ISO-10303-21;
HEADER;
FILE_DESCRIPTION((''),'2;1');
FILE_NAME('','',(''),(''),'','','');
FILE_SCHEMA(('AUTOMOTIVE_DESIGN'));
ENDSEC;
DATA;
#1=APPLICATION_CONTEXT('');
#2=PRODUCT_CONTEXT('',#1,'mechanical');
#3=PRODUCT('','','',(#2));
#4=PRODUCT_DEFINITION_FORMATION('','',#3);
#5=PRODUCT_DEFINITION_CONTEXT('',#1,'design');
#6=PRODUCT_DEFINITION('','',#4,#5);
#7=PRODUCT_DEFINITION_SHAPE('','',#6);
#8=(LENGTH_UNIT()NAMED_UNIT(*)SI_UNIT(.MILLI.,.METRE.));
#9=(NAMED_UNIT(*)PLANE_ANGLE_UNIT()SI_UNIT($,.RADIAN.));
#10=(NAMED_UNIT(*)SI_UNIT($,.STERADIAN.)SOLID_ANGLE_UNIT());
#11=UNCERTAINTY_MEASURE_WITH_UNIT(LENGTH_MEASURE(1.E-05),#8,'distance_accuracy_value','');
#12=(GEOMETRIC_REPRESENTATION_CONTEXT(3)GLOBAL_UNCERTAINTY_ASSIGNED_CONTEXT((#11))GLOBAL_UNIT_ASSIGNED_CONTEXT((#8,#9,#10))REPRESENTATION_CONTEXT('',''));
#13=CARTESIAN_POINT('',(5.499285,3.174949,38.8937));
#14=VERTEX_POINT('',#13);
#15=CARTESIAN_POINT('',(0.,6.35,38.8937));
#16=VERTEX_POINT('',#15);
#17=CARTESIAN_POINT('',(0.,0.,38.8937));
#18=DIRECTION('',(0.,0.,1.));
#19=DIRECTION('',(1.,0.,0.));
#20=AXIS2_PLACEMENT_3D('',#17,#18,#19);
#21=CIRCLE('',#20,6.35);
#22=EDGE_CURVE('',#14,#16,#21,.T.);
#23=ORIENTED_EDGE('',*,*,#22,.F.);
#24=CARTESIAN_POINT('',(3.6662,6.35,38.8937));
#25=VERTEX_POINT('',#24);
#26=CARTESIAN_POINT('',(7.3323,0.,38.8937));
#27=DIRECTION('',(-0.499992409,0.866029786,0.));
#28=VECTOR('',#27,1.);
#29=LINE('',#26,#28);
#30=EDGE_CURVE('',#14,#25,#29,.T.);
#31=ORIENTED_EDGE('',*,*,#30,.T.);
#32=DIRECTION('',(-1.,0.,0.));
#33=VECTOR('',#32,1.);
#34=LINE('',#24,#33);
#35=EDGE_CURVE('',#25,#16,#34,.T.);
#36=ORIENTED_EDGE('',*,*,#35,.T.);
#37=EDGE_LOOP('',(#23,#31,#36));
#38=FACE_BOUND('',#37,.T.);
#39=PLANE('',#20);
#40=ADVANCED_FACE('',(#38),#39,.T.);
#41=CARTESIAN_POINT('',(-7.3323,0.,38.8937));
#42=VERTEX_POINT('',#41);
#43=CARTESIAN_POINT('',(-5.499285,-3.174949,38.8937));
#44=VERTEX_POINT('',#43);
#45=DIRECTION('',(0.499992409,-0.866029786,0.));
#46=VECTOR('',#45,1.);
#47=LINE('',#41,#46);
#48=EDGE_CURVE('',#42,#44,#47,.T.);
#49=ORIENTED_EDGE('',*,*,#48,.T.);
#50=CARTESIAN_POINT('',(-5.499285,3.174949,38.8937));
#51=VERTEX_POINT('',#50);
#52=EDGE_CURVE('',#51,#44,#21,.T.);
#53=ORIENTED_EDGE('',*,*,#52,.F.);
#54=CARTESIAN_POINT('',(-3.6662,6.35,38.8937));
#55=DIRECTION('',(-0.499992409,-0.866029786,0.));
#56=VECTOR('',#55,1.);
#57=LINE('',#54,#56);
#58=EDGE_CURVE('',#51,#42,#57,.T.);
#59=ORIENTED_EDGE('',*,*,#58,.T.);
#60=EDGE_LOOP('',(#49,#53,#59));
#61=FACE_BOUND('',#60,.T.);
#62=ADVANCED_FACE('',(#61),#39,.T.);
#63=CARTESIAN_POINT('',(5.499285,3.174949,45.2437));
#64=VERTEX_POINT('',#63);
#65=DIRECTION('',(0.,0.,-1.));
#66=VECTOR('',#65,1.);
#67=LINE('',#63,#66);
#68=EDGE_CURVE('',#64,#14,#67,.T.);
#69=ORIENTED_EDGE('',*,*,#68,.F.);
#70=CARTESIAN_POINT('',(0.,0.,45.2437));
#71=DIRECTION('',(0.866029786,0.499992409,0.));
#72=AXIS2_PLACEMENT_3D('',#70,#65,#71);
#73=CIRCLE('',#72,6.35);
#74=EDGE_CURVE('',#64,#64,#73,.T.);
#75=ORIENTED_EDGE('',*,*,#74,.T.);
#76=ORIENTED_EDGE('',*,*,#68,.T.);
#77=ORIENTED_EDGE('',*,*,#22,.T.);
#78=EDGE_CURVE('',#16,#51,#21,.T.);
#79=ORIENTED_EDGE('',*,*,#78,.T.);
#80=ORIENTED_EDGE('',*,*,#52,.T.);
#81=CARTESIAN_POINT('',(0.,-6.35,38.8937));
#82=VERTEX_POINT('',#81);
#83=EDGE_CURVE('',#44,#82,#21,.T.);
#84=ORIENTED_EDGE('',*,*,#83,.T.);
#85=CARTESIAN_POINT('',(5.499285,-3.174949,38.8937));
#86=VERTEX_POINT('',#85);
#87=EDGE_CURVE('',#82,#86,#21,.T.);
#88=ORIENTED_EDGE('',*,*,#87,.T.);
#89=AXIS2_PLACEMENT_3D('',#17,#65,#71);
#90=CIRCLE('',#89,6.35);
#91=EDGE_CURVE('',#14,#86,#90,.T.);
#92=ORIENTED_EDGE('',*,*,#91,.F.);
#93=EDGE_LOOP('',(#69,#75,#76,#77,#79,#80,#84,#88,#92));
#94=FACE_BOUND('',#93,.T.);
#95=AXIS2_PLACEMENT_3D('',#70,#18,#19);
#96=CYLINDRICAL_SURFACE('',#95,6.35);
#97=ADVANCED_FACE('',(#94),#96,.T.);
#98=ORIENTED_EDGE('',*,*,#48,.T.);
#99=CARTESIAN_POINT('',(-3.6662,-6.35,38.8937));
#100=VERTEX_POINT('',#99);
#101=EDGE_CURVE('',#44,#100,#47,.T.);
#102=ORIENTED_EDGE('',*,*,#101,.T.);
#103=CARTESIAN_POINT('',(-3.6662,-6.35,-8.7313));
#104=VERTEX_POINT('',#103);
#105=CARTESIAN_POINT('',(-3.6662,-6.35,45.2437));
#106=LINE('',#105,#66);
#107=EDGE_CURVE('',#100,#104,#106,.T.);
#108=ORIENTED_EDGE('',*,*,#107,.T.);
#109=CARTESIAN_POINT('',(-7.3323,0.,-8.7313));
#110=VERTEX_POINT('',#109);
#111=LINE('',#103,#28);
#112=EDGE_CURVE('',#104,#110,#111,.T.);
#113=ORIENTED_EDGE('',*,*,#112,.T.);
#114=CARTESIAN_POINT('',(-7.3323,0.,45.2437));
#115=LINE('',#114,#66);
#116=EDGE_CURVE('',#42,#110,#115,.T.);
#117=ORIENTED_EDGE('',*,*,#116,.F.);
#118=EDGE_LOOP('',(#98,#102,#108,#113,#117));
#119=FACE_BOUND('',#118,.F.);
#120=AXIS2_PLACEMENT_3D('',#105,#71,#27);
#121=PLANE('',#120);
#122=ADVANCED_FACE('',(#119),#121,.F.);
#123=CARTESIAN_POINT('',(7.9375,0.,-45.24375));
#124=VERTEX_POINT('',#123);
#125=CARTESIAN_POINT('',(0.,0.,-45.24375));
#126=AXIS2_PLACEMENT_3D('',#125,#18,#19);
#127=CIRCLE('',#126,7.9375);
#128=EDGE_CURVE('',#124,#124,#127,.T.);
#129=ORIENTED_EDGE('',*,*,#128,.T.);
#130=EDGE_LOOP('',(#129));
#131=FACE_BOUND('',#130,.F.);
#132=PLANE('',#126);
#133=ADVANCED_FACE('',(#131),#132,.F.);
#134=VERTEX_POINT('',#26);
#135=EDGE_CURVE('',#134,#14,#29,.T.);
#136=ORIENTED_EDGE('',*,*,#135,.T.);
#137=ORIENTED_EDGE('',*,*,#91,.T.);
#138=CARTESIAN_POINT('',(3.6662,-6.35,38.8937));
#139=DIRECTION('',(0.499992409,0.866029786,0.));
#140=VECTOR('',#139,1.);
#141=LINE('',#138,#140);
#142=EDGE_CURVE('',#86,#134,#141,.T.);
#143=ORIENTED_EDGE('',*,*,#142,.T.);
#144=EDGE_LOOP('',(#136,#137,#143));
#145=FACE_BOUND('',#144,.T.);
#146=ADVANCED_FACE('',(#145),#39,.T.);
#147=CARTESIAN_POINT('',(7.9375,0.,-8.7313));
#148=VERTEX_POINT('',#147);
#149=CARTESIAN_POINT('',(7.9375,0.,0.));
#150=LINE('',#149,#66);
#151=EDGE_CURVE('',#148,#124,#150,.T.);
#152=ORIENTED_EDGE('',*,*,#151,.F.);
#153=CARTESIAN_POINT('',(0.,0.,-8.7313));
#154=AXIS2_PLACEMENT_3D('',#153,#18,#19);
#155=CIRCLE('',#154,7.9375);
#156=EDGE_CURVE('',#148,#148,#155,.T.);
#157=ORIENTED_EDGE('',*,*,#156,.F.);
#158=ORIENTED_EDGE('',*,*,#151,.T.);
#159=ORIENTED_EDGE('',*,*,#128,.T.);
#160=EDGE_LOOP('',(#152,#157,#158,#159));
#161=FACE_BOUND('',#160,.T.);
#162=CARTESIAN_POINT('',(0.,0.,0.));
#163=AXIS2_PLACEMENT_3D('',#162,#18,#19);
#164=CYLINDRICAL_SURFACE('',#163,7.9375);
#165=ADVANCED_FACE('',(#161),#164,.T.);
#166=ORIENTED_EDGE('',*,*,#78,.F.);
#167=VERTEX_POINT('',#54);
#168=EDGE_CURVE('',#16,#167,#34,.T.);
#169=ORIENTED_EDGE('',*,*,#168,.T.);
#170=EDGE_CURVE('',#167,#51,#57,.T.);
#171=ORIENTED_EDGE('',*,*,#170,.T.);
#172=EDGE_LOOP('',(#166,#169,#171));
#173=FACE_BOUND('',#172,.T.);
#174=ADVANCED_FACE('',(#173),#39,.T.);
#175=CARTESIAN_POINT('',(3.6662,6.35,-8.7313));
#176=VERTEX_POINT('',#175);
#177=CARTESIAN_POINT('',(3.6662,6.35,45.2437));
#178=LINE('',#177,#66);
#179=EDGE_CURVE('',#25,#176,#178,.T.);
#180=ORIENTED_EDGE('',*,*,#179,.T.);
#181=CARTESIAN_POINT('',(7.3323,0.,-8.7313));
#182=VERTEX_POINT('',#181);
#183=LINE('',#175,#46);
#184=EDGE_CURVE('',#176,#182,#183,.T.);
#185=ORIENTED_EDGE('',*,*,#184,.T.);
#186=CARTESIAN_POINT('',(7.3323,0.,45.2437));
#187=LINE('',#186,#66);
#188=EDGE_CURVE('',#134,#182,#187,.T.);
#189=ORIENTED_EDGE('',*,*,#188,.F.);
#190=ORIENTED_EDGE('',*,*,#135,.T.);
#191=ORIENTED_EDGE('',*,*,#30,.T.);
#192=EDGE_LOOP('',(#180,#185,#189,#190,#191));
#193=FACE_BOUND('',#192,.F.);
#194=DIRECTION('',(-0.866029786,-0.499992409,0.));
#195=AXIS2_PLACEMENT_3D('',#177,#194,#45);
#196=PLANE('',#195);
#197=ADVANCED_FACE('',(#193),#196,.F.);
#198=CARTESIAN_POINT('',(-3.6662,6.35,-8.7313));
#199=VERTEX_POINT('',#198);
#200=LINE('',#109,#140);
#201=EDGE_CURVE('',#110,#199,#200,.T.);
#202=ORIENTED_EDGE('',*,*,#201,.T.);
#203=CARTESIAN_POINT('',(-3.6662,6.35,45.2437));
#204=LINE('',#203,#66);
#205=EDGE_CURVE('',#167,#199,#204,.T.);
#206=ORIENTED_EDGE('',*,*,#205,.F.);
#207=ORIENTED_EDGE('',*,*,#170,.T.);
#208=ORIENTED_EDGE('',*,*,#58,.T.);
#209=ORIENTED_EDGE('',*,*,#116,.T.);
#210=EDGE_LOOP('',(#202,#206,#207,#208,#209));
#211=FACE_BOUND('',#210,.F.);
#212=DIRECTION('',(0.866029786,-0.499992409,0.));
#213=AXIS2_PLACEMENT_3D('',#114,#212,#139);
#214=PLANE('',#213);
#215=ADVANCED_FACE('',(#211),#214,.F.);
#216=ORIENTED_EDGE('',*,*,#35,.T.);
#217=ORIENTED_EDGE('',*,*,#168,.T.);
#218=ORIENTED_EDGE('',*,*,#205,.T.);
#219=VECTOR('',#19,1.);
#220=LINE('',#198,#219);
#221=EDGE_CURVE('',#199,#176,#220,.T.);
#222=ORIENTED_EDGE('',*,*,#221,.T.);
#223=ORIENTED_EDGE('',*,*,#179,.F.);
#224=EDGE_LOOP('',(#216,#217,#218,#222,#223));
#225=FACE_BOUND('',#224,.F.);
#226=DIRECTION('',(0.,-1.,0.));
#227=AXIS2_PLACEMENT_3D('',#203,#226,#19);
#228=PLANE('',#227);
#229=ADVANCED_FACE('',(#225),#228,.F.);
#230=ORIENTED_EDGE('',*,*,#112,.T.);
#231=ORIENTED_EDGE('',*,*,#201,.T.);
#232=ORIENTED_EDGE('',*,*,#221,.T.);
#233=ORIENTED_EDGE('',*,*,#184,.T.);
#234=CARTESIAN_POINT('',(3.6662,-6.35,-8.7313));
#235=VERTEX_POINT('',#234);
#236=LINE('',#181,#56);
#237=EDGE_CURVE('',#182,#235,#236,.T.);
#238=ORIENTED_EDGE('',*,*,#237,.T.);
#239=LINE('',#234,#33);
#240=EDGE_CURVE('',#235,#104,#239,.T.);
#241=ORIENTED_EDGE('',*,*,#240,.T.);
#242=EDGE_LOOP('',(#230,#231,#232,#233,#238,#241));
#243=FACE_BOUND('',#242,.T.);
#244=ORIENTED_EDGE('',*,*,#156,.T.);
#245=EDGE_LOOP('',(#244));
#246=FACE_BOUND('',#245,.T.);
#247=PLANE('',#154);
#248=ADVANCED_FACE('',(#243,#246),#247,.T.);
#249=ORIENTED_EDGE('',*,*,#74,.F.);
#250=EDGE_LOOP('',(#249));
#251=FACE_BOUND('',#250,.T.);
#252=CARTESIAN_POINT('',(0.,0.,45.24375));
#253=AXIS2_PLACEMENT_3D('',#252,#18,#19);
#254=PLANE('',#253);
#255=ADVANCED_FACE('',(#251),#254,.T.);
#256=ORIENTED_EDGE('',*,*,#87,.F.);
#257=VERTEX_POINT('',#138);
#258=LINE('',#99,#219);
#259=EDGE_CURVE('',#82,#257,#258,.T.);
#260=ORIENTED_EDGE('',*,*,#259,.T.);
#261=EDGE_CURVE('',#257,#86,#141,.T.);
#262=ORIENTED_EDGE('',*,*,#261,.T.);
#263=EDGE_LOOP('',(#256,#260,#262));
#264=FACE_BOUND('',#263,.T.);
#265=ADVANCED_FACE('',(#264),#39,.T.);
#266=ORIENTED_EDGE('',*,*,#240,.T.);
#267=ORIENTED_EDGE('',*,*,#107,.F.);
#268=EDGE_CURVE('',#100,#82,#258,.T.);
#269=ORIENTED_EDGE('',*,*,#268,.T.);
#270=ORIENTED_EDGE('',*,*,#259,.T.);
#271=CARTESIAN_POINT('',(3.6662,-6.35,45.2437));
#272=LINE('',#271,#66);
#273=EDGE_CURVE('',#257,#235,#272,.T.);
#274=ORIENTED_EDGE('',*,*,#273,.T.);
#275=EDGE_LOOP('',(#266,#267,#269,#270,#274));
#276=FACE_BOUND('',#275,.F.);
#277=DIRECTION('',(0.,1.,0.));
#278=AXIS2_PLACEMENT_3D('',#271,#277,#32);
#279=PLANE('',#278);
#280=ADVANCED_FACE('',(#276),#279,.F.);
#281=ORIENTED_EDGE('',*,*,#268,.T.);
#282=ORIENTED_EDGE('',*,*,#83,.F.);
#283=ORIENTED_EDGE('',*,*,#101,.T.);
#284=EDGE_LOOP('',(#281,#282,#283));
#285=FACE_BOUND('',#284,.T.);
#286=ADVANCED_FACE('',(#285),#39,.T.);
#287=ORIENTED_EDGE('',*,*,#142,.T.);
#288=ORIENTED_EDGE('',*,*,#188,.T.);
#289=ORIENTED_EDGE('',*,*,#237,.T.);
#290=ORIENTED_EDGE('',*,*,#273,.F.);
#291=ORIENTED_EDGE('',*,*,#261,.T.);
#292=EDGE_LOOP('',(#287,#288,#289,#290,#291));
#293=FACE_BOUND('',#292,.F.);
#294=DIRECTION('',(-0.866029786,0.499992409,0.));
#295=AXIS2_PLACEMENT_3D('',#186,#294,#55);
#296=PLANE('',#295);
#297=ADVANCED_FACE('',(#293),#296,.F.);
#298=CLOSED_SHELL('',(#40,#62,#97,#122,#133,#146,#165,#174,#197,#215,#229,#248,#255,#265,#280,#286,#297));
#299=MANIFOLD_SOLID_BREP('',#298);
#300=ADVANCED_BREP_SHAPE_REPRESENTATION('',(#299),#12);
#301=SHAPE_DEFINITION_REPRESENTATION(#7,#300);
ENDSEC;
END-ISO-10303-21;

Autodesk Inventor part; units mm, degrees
ref_plane "YZ Plane" through (0, 0, 0) normal (1, 0, 0) x (0, 1, 0)
ref_plane "XZ Plane" through (0, 0, 0) normal (0, 1, 0) x (-1, 0, 0)
ref_plane "XY Plane" through (0, 0, 0) normal (0, 0, 1) x (1, 0, 0)
sketch "Sketch1" plane through (0, 0, 0) normal (0, 0, 1) x (1, 0, 0)
  circle A0 centre (0, 0) radius 7.9375
  dimension "d0" = 15.875
extrude "Extrusion1" add sketch "Sketch1" along normal mid plane 90.4875
sketch "Sketch2" plane through (0, 0, 45.2437) normal (0, 0, 1) x (1, 0, 0)
  line L0 (-3.6662, 6.35) -> (3.6662, 6.35)
  line L1 (3.6662, 6.35) -> (7.3323, 0)
  line L2 (7.3323, 0) -> (3.6662, -6.35)
  line L3 (3.6662, -6.35) -> (-3.6662, -6.35)
  line L4 (-3.6662, -6.35) -> (-7.3323, 0)
  line L5 (-7.3323, 0) -> (-3.6662, 6.35)
  circle A0 centre (0, 0) radius 7.9375 projected
  point P0 (0, -6.35)
  point P1 (0, 6.35)
  dimension "d3" = 12.7
extrude "Extrusion2" cut sketch "Sketch2" against normal blind 53.975
sketch "Sketch3" plane through (0, 0, 45.2437) normal (0, 0, 1) x (1, 0, 0)
  circle A0 centre (0, 0) radius 6.35
  circle A1 centre (0, 0) radius 7.9375 projected
  line L0 (3.6662, 6.35) -> (-3.6662, 6.35) projected
  line L1 (7.3323, 0) -> (3.6662, 6.35) projected
  line L2 (3.6662, -6.35) -> (7.3323, 0) projected
  line L3 (-3.6662, -6.35) -> (3.6662, -6.35) projected
  line L4 (-7.3323, 0) -> (-3.6662, -6.35) projected
  line L5 (-3.6662, 6.35) -> (-7.3323, 0) projected
  point P0 (-5.4993, 3.175)
  point P1 (0, 6.35)
  point P2 (-5.4993, -3.175)
  point P3 (0, -6.35)
  point P4 (5.4993, -3.175)
  point P5 (5.4993, 3.175)
  dimension "d6" = 12.7
extrude "Extrusion3" cut sketch "Sketch3" against normal blind 6.35 contours A0 L1 L2 | A0 L0 L1 | L2 L3 A0 | A0 L5 L0 | L3 L4 A0 | A0 L4 L5
properties part number "EL2-C-007" material "Aluminum 6061"
